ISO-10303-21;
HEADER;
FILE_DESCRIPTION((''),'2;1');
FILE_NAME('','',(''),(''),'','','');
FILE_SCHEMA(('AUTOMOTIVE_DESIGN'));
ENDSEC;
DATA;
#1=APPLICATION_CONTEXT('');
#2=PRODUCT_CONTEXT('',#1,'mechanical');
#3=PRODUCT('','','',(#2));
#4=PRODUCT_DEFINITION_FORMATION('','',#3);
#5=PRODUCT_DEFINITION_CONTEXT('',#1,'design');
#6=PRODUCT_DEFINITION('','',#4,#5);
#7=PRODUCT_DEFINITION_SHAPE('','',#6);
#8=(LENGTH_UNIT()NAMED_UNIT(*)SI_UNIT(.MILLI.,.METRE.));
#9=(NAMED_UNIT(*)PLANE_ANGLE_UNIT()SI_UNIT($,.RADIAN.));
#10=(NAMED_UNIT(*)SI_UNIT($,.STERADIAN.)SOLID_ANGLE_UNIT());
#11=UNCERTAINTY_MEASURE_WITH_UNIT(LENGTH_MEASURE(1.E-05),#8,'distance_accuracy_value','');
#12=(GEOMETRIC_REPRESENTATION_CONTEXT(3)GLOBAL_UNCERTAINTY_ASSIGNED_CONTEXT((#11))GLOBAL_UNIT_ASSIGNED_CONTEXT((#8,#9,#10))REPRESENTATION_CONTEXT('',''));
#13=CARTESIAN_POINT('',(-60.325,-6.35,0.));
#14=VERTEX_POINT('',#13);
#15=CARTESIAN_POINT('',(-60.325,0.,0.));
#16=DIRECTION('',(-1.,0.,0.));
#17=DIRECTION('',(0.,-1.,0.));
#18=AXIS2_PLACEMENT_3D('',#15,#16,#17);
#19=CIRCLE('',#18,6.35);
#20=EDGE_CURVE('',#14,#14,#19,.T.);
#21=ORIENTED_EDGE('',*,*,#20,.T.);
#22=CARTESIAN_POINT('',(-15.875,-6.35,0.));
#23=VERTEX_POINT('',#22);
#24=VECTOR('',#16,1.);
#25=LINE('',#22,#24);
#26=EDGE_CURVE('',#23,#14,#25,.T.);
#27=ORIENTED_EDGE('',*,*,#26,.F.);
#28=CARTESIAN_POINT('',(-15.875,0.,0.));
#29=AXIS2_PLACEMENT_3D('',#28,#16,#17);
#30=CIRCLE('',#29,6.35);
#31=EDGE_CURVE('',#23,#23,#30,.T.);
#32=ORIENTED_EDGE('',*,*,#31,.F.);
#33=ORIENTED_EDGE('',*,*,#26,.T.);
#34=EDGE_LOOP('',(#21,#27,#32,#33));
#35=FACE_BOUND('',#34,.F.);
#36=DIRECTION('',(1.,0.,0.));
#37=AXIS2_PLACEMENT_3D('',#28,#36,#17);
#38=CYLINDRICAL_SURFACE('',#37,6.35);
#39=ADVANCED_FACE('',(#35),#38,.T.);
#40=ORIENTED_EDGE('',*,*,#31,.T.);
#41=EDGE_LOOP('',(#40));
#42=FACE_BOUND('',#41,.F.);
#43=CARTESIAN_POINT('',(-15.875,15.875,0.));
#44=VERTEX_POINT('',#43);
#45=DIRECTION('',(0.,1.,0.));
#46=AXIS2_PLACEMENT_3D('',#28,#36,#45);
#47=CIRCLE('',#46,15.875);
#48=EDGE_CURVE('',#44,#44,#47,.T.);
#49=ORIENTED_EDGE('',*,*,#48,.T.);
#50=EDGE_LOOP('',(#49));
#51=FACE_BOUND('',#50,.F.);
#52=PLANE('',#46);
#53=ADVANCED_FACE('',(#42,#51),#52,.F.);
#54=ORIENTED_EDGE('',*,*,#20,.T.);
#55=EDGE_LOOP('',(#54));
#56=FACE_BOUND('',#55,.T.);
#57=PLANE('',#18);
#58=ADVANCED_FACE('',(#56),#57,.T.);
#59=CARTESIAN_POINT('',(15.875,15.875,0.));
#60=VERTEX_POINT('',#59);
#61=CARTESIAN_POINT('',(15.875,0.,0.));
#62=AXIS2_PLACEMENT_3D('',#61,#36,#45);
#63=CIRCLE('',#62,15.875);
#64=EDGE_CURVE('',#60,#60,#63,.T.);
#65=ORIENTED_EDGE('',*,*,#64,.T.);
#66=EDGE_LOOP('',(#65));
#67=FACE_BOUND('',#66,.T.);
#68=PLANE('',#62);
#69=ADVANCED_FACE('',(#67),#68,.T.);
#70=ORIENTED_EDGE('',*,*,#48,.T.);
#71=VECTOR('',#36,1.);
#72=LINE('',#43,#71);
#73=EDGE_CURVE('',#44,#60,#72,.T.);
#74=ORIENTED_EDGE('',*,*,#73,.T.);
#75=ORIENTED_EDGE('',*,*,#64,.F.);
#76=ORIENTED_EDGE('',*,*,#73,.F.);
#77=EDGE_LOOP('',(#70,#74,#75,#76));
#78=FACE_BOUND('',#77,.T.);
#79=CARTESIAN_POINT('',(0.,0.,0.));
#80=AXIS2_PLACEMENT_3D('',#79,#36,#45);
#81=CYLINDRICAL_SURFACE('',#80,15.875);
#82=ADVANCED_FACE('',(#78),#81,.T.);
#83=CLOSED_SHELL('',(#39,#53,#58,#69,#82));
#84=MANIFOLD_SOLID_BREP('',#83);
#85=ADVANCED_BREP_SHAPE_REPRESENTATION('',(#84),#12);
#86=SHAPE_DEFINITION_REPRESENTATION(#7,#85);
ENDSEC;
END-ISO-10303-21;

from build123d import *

# Parameters (mm, degrees)
F0_R     = 15.875
F1_DEPTH = 15.875
F6_R     = 6.35
F7_DEPTH = 44.45


# Not quite as in the source:
# - the program builds the solid bodies; features that only make, move or delete a surface that nothing else refers to are left out


with BuildPart() as f1:
    # F0 (on Right) → F1 (new body, symmetric)
    with BuildSketch(Plane.YZ):
        Circle(F0_R)
    extrude(amount=F1_DEPTH, both=True)

    # F6 (on face) → F7 (join)
    with BuildSketch(Plane(origin=(-15.875, 0, 0), x_dir=(0, -1, 0), z_dir=(-1, 0, 0))):
        Circle(F6_R)
    extrude(amount=F7_DEPTH)


solid = f1.part
